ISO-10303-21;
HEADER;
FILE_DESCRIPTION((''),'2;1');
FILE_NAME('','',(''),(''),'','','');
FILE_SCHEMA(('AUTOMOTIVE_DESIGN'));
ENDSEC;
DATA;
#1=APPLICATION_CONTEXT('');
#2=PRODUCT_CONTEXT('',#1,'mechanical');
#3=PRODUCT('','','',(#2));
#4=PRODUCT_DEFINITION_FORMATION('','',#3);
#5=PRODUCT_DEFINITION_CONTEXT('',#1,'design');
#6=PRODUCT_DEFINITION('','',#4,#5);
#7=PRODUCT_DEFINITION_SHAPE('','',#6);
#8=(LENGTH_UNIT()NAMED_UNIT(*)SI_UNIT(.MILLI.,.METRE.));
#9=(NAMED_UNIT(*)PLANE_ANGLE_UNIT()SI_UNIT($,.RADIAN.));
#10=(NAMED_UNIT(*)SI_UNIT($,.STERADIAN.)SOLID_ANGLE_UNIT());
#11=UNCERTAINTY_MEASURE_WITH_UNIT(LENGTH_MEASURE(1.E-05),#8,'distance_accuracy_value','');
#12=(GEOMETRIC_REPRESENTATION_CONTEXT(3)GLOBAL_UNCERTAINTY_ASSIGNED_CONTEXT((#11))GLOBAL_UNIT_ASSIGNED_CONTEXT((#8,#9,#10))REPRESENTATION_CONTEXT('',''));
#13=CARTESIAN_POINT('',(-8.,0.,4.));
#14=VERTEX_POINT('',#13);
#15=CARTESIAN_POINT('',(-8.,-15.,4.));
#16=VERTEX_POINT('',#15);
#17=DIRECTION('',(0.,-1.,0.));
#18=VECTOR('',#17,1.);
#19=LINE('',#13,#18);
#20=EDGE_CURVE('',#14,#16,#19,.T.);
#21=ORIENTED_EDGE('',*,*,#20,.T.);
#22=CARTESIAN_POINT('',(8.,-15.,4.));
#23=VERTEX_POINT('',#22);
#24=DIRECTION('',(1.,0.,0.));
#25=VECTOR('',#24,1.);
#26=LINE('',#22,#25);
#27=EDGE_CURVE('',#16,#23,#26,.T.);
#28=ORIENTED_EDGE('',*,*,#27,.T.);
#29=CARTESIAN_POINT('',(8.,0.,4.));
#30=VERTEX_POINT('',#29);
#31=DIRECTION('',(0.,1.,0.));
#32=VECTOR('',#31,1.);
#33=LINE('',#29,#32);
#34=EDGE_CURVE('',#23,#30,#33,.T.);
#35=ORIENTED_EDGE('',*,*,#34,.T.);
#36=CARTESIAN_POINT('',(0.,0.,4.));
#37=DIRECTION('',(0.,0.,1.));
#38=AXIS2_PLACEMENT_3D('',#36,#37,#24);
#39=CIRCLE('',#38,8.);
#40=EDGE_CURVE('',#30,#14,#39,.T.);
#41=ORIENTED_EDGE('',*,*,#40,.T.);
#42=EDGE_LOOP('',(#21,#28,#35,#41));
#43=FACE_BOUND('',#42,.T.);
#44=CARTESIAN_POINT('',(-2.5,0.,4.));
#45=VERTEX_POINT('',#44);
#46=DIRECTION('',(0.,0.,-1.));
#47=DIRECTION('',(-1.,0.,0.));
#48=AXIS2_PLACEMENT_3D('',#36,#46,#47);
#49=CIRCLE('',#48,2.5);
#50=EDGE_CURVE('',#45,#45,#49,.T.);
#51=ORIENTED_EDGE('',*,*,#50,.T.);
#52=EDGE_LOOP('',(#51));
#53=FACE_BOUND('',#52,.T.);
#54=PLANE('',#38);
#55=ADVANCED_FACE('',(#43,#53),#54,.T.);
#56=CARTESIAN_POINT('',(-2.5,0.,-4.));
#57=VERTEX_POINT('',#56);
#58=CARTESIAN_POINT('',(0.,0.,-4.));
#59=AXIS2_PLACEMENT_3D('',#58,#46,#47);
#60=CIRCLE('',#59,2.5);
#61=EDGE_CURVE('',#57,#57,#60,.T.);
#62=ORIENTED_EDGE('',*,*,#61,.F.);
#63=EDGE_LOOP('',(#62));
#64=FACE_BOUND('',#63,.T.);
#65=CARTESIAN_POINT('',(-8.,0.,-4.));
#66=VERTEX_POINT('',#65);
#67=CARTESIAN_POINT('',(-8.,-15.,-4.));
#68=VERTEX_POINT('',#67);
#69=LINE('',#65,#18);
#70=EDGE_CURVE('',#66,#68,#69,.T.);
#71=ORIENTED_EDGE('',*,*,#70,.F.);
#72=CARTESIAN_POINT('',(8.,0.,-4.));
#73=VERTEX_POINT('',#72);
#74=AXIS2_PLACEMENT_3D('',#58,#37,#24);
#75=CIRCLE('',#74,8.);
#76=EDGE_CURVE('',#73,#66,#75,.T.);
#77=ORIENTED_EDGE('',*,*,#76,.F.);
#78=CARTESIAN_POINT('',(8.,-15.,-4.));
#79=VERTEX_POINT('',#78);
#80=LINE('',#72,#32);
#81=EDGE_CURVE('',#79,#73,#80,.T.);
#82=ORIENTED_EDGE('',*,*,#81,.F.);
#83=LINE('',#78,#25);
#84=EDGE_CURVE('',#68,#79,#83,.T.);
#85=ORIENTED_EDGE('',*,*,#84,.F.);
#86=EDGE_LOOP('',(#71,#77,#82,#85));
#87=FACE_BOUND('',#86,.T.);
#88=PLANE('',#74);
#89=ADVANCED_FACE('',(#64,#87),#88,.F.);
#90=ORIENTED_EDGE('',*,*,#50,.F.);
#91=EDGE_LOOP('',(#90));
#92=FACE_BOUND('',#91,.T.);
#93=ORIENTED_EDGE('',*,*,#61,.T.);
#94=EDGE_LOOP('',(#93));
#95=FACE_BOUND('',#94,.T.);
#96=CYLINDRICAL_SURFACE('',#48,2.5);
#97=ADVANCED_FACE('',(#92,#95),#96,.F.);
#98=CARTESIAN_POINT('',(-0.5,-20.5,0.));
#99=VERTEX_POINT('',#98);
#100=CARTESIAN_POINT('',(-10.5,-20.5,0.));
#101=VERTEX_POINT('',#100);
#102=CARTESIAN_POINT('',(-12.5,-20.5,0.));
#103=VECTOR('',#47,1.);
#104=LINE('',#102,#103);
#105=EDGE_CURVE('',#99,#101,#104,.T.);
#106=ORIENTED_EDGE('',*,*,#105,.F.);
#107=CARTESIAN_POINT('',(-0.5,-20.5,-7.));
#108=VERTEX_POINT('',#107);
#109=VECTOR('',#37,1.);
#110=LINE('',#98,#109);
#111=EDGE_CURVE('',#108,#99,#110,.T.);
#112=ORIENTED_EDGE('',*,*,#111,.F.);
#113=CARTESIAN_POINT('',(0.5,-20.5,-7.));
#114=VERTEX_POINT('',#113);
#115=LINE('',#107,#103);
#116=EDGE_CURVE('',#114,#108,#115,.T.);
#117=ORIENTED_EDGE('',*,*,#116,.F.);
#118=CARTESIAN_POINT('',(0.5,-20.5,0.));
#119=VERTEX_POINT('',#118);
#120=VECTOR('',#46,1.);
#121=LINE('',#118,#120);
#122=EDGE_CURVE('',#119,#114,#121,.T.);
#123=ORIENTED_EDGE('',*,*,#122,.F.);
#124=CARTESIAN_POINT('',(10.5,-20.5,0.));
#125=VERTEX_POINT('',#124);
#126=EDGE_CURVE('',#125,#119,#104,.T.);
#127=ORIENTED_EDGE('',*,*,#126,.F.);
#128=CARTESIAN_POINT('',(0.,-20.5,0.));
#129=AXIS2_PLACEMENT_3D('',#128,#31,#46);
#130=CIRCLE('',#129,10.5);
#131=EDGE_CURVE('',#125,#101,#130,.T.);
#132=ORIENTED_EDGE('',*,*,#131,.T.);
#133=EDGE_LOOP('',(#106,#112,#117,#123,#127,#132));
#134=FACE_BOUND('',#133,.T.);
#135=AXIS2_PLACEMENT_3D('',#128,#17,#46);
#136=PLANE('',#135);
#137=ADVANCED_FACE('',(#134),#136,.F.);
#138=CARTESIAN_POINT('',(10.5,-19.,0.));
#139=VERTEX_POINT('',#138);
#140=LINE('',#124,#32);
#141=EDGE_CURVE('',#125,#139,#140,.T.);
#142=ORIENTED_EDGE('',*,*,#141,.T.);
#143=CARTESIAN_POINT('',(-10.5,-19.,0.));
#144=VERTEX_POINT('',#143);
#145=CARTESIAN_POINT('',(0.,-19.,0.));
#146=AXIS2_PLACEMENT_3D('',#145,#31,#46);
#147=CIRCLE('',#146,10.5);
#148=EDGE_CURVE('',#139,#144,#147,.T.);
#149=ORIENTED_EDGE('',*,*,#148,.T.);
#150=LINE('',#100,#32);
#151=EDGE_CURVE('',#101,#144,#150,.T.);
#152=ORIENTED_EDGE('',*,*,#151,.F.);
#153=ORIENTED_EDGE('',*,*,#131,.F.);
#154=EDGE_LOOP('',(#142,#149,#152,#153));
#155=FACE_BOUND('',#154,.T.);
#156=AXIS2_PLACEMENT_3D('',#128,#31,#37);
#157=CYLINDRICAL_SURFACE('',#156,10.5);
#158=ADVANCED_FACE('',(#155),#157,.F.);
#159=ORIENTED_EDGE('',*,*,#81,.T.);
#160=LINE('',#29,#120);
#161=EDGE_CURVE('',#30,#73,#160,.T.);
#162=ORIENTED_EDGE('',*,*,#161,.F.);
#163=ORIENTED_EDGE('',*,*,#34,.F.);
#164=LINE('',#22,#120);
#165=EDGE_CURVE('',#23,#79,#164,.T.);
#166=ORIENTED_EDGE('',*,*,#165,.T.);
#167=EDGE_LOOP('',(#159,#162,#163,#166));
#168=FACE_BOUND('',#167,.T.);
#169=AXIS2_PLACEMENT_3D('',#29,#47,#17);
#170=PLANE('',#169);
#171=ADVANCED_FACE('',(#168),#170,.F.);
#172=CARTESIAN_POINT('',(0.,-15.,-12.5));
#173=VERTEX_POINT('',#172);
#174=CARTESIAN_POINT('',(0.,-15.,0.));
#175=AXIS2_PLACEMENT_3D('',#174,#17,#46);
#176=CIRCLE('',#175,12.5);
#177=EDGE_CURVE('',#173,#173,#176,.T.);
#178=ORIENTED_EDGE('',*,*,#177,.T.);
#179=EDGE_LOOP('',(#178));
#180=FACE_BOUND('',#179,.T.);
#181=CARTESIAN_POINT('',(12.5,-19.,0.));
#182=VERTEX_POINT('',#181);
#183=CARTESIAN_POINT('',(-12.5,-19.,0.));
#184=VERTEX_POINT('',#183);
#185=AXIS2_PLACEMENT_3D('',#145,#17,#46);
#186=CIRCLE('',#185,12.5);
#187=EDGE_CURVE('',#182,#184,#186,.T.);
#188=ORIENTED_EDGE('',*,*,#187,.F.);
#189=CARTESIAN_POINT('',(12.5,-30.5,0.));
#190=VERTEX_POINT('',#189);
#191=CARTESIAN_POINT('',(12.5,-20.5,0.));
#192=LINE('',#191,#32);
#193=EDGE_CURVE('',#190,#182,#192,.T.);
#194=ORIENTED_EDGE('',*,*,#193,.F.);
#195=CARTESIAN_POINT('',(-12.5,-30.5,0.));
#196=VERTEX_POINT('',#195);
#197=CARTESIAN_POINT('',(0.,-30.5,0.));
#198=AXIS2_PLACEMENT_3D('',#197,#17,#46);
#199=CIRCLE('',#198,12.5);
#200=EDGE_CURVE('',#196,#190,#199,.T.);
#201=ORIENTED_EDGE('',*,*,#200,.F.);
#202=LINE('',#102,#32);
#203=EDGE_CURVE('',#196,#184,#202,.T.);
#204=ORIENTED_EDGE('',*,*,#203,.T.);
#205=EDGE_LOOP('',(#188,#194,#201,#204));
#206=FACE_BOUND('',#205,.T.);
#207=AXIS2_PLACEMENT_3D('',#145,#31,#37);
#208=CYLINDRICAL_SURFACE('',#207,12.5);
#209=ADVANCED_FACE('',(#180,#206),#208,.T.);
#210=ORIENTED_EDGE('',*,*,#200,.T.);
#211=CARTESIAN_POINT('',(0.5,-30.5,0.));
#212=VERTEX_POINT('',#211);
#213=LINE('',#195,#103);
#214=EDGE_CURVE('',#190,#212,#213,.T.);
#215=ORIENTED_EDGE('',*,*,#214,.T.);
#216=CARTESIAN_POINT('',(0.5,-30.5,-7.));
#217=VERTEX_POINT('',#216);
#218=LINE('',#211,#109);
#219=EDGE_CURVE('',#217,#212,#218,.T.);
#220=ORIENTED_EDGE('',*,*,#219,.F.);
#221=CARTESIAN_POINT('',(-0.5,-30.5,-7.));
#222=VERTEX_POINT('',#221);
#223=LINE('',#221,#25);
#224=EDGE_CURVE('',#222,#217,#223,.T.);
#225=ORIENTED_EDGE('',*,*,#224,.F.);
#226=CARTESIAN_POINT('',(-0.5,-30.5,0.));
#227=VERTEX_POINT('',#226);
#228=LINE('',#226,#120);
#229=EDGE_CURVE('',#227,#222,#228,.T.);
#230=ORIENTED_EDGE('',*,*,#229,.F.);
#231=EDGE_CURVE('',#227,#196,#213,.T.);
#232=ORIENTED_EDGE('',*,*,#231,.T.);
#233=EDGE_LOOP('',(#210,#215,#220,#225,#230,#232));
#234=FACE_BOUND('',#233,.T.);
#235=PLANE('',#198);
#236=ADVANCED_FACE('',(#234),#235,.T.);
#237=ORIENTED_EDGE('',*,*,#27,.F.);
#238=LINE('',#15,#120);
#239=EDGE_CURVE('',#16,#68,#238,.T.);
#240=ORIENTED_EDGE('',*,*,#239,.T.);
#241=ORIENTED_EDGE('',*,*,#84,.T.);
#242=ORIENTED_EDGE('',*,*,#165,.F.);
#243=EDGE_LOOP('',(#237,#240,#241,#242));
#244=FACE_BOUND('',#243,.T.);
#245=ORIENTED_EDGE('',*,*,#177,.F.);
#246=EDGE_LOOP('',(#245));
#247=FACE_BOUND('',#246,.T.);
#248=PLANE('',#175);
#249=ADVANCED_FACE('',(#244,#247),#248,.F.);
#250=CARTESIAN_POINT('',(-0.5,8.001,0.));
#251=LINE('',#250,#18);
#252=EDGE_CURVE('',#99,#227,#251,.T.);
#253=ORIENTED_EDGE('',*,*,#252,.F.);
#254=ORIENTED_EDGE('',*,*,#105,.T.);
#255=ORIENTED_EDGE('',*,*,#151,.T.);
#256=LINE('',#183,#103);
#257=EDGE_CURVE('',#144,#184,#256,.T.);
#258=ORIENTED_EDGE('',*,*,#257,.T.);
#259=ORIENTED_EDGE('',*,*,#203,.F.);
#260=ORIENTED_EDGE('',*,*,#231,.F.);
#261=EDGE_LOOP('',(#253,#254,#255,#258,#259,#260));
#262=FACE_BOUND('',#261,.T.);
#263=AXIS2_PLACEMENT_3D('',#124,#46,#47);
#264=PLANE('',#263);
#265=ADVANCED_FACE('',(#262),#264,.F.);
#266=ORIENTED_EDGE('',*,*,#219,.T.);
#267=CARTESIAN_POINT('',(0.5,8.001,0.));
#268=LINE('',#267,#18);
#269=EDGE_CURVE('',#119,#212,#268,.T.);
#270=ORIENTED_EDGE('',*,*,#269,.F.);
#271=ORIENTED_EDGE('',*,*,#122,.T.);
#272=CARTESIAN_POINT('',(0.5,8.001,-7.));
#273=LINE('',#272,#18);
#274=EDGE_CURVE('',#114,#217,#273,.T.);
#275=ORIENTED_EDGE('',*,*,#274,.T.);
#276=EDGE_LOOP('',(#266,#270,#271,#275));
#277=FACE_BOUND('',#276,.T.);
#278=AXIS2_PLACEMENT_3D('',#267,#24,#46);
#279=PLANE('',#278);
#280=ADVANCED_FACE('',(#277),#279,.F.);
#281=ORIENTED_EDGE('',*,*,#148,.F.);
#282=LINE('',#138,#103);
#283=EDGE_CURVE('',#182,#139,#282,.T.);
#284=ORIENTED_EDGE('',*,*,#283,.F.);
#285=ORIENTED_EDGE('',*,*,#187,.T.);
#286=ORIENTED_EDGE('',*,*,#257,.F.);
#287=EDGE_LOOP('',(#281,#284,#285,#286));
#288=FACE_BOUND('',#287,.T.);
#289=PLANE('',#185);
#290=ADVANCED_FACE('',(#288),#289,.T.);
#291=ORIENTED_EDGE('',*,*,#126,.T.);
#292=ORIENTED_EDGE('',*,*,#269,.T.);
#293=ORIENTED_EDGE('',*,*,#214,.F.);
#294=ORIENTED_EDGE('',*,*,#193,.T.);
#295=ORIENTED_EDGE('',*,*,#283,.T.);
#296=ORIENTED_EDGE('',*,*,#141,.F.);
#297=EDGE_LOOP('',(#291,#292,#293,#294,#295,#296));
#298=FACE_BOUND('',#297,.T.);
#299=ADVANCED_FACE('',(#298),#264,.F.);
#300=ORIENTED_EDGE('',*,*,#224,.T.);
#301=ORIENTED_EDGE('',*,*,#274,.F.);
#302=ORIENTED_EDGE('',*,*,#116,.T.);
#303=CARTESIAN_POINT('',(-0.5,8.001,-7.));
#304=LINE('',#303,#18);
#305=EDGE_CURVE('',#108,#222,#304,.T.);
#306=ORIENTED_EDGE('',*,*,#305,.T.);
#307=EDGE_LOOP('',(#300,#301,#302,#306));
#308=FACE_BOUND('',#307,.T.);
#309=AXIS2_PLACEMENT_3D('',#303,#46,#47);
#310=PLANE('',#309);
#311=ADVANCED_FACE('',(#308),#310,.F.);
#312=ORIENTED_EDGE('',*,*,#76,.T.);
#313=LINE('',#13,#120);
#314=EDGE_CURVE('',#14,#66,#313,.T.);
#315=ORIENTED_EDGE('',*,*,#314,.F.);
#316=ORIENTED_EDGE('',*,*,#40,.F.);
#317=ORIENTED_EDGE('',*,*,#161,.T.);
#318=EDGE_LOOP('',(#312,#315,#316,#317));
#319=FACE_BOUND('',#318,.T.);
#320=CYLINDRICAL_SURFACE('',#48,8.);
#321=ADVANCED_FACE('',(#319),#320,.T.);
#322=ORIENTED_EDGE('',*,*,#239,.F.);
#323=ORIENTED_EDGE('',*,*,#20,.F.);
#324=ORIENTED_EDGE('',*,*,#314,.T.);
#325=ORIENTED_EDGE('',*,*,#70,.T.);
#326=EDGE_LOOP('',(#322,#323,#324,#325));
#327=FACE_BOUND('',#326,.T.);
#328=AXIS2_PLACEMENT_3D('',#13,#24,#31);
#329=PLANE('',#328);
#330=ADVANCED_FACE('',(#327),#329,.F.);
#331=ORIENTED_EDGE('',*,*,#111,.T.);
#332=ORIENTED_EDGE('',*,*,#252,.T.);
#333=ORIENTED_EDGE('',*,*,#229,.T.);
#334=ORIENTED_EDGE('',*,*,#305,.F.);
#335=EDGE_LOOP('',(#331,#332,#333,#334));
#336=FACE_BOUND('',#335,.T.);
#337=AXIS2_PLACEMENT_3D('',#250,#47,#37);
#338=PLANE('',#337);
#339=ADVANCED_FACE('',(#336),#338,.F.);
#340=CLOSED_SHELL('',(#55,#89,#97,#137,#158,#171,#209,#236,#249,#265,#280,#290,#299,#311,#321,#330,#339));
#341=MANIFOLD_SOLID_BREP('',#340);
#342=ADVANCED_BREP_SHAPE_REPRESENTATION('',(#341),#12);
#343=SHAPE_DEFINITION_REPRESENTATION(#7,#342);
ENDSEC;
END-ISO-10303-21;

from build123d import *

# Parameters (mm, degrees)
BOSS_EXTRUDE2_DEPTH = 4
SKETCH4_R           = 2.5
CUT_EXTRUDE1_DEPTH  = 19.788294228
SKETCH6_R           = 12.5
BOSS_EXTRUDE3_DEPTH = 4
BOSS_EXTRUDE4_DEPTH = 1.5
BOSS_EXTRUDE5_DEPTH = 10
CUT_EXTRUDE2_REACH  = 44.364
SKETCH9_W           = 1
SKETCH9_H           = 7


with BuildPart() as part:
    # Sketch3 → Boss-Extrude2 (new, symmetric)
    with BuildSketch(Plane.XY):
        with BuildLine():
            Line((8, 0), (8, -15))
            Line((8, -15), (-8, -15))
            Line((-8, -15), (-8, 0))
            ThreePointArc((-8, 0), (0, 8), (8, 0))
        make_face()
    extrude(amount=BOSS_EXTRUDE2_DEPTH, both=True)

    # Sketch4 → Cut-Extrude1 (cut, through all)
    with BuildSketch(Plane(origin=(0, 0, -4), x_dir=(-1, 0, 0), z_dir=(0, 0, -1))):
        Circle(SKETCH4_R)
    extrude(amount=-CUT_EXTRUDE1_DEPTH, mode=Mode.SUBTRACT)

    # Sketch6 → Boss-Extrude3 (add)
    with BuildSketch(Plane.XZ.offset(15)):
        Circle(SKETCH6_R)
    extrude(amount=BOSS_EXTRUDE3_DEPTH)

    # Sketch7 → Boss-Extrude4 (add)
    with BuildSketch(Plane.XZ.offset(19)):
        with BuildLine():
            Line((-12.5, 0), (-10.5, 0))
            ThreePointArc((-10.5, 0), (0, -10.5), (10.5, 0))
            Line((10.5, 0), (12.5, 0))
            ThreePointArc((12.5, 0), (0, -12.5), (-12.5, 0))
        make_face()
    extrude(amount=BOSS_EXTRUDE4_DEPTH)

    # Sketch8 → Boss-Extrude5 (add)
    with BuildSketch(Plane.XZ.offset(20.5)):
        with BuildLine():
            Line((-12.5, 0), (12.5, 0))
            ThreePointArc((12.5, 0), (0, -12.5), (-12.5, 0))
        make_face()
    extrude(amount=BOSS_EXTRUDE5_DEPTH)

    # Sketch9 → Cut-Extrude2 (cut, up to next)
    with BuildSketch(Plane.XZ.offset(30.5), mode=Mode.PRIVATE) as cut_extrude2_sk1:
        with Locations((0, -3.5)):
            Rectangle(SKETCH9_W, SKETCH9_H)
    cut_extrude2_tool1 = extrude(cut_extrude2_sk1.sketch, amount=-CUT_EXTRUDE2_REACH, mode=Mode.PRIVATE) & part.part
    add(cut_extrude2_tool1.solids().sort_by_distance((0, -30.5, -3.5))[0], mode=Mode.SUBTRACT)


solid = part.part
